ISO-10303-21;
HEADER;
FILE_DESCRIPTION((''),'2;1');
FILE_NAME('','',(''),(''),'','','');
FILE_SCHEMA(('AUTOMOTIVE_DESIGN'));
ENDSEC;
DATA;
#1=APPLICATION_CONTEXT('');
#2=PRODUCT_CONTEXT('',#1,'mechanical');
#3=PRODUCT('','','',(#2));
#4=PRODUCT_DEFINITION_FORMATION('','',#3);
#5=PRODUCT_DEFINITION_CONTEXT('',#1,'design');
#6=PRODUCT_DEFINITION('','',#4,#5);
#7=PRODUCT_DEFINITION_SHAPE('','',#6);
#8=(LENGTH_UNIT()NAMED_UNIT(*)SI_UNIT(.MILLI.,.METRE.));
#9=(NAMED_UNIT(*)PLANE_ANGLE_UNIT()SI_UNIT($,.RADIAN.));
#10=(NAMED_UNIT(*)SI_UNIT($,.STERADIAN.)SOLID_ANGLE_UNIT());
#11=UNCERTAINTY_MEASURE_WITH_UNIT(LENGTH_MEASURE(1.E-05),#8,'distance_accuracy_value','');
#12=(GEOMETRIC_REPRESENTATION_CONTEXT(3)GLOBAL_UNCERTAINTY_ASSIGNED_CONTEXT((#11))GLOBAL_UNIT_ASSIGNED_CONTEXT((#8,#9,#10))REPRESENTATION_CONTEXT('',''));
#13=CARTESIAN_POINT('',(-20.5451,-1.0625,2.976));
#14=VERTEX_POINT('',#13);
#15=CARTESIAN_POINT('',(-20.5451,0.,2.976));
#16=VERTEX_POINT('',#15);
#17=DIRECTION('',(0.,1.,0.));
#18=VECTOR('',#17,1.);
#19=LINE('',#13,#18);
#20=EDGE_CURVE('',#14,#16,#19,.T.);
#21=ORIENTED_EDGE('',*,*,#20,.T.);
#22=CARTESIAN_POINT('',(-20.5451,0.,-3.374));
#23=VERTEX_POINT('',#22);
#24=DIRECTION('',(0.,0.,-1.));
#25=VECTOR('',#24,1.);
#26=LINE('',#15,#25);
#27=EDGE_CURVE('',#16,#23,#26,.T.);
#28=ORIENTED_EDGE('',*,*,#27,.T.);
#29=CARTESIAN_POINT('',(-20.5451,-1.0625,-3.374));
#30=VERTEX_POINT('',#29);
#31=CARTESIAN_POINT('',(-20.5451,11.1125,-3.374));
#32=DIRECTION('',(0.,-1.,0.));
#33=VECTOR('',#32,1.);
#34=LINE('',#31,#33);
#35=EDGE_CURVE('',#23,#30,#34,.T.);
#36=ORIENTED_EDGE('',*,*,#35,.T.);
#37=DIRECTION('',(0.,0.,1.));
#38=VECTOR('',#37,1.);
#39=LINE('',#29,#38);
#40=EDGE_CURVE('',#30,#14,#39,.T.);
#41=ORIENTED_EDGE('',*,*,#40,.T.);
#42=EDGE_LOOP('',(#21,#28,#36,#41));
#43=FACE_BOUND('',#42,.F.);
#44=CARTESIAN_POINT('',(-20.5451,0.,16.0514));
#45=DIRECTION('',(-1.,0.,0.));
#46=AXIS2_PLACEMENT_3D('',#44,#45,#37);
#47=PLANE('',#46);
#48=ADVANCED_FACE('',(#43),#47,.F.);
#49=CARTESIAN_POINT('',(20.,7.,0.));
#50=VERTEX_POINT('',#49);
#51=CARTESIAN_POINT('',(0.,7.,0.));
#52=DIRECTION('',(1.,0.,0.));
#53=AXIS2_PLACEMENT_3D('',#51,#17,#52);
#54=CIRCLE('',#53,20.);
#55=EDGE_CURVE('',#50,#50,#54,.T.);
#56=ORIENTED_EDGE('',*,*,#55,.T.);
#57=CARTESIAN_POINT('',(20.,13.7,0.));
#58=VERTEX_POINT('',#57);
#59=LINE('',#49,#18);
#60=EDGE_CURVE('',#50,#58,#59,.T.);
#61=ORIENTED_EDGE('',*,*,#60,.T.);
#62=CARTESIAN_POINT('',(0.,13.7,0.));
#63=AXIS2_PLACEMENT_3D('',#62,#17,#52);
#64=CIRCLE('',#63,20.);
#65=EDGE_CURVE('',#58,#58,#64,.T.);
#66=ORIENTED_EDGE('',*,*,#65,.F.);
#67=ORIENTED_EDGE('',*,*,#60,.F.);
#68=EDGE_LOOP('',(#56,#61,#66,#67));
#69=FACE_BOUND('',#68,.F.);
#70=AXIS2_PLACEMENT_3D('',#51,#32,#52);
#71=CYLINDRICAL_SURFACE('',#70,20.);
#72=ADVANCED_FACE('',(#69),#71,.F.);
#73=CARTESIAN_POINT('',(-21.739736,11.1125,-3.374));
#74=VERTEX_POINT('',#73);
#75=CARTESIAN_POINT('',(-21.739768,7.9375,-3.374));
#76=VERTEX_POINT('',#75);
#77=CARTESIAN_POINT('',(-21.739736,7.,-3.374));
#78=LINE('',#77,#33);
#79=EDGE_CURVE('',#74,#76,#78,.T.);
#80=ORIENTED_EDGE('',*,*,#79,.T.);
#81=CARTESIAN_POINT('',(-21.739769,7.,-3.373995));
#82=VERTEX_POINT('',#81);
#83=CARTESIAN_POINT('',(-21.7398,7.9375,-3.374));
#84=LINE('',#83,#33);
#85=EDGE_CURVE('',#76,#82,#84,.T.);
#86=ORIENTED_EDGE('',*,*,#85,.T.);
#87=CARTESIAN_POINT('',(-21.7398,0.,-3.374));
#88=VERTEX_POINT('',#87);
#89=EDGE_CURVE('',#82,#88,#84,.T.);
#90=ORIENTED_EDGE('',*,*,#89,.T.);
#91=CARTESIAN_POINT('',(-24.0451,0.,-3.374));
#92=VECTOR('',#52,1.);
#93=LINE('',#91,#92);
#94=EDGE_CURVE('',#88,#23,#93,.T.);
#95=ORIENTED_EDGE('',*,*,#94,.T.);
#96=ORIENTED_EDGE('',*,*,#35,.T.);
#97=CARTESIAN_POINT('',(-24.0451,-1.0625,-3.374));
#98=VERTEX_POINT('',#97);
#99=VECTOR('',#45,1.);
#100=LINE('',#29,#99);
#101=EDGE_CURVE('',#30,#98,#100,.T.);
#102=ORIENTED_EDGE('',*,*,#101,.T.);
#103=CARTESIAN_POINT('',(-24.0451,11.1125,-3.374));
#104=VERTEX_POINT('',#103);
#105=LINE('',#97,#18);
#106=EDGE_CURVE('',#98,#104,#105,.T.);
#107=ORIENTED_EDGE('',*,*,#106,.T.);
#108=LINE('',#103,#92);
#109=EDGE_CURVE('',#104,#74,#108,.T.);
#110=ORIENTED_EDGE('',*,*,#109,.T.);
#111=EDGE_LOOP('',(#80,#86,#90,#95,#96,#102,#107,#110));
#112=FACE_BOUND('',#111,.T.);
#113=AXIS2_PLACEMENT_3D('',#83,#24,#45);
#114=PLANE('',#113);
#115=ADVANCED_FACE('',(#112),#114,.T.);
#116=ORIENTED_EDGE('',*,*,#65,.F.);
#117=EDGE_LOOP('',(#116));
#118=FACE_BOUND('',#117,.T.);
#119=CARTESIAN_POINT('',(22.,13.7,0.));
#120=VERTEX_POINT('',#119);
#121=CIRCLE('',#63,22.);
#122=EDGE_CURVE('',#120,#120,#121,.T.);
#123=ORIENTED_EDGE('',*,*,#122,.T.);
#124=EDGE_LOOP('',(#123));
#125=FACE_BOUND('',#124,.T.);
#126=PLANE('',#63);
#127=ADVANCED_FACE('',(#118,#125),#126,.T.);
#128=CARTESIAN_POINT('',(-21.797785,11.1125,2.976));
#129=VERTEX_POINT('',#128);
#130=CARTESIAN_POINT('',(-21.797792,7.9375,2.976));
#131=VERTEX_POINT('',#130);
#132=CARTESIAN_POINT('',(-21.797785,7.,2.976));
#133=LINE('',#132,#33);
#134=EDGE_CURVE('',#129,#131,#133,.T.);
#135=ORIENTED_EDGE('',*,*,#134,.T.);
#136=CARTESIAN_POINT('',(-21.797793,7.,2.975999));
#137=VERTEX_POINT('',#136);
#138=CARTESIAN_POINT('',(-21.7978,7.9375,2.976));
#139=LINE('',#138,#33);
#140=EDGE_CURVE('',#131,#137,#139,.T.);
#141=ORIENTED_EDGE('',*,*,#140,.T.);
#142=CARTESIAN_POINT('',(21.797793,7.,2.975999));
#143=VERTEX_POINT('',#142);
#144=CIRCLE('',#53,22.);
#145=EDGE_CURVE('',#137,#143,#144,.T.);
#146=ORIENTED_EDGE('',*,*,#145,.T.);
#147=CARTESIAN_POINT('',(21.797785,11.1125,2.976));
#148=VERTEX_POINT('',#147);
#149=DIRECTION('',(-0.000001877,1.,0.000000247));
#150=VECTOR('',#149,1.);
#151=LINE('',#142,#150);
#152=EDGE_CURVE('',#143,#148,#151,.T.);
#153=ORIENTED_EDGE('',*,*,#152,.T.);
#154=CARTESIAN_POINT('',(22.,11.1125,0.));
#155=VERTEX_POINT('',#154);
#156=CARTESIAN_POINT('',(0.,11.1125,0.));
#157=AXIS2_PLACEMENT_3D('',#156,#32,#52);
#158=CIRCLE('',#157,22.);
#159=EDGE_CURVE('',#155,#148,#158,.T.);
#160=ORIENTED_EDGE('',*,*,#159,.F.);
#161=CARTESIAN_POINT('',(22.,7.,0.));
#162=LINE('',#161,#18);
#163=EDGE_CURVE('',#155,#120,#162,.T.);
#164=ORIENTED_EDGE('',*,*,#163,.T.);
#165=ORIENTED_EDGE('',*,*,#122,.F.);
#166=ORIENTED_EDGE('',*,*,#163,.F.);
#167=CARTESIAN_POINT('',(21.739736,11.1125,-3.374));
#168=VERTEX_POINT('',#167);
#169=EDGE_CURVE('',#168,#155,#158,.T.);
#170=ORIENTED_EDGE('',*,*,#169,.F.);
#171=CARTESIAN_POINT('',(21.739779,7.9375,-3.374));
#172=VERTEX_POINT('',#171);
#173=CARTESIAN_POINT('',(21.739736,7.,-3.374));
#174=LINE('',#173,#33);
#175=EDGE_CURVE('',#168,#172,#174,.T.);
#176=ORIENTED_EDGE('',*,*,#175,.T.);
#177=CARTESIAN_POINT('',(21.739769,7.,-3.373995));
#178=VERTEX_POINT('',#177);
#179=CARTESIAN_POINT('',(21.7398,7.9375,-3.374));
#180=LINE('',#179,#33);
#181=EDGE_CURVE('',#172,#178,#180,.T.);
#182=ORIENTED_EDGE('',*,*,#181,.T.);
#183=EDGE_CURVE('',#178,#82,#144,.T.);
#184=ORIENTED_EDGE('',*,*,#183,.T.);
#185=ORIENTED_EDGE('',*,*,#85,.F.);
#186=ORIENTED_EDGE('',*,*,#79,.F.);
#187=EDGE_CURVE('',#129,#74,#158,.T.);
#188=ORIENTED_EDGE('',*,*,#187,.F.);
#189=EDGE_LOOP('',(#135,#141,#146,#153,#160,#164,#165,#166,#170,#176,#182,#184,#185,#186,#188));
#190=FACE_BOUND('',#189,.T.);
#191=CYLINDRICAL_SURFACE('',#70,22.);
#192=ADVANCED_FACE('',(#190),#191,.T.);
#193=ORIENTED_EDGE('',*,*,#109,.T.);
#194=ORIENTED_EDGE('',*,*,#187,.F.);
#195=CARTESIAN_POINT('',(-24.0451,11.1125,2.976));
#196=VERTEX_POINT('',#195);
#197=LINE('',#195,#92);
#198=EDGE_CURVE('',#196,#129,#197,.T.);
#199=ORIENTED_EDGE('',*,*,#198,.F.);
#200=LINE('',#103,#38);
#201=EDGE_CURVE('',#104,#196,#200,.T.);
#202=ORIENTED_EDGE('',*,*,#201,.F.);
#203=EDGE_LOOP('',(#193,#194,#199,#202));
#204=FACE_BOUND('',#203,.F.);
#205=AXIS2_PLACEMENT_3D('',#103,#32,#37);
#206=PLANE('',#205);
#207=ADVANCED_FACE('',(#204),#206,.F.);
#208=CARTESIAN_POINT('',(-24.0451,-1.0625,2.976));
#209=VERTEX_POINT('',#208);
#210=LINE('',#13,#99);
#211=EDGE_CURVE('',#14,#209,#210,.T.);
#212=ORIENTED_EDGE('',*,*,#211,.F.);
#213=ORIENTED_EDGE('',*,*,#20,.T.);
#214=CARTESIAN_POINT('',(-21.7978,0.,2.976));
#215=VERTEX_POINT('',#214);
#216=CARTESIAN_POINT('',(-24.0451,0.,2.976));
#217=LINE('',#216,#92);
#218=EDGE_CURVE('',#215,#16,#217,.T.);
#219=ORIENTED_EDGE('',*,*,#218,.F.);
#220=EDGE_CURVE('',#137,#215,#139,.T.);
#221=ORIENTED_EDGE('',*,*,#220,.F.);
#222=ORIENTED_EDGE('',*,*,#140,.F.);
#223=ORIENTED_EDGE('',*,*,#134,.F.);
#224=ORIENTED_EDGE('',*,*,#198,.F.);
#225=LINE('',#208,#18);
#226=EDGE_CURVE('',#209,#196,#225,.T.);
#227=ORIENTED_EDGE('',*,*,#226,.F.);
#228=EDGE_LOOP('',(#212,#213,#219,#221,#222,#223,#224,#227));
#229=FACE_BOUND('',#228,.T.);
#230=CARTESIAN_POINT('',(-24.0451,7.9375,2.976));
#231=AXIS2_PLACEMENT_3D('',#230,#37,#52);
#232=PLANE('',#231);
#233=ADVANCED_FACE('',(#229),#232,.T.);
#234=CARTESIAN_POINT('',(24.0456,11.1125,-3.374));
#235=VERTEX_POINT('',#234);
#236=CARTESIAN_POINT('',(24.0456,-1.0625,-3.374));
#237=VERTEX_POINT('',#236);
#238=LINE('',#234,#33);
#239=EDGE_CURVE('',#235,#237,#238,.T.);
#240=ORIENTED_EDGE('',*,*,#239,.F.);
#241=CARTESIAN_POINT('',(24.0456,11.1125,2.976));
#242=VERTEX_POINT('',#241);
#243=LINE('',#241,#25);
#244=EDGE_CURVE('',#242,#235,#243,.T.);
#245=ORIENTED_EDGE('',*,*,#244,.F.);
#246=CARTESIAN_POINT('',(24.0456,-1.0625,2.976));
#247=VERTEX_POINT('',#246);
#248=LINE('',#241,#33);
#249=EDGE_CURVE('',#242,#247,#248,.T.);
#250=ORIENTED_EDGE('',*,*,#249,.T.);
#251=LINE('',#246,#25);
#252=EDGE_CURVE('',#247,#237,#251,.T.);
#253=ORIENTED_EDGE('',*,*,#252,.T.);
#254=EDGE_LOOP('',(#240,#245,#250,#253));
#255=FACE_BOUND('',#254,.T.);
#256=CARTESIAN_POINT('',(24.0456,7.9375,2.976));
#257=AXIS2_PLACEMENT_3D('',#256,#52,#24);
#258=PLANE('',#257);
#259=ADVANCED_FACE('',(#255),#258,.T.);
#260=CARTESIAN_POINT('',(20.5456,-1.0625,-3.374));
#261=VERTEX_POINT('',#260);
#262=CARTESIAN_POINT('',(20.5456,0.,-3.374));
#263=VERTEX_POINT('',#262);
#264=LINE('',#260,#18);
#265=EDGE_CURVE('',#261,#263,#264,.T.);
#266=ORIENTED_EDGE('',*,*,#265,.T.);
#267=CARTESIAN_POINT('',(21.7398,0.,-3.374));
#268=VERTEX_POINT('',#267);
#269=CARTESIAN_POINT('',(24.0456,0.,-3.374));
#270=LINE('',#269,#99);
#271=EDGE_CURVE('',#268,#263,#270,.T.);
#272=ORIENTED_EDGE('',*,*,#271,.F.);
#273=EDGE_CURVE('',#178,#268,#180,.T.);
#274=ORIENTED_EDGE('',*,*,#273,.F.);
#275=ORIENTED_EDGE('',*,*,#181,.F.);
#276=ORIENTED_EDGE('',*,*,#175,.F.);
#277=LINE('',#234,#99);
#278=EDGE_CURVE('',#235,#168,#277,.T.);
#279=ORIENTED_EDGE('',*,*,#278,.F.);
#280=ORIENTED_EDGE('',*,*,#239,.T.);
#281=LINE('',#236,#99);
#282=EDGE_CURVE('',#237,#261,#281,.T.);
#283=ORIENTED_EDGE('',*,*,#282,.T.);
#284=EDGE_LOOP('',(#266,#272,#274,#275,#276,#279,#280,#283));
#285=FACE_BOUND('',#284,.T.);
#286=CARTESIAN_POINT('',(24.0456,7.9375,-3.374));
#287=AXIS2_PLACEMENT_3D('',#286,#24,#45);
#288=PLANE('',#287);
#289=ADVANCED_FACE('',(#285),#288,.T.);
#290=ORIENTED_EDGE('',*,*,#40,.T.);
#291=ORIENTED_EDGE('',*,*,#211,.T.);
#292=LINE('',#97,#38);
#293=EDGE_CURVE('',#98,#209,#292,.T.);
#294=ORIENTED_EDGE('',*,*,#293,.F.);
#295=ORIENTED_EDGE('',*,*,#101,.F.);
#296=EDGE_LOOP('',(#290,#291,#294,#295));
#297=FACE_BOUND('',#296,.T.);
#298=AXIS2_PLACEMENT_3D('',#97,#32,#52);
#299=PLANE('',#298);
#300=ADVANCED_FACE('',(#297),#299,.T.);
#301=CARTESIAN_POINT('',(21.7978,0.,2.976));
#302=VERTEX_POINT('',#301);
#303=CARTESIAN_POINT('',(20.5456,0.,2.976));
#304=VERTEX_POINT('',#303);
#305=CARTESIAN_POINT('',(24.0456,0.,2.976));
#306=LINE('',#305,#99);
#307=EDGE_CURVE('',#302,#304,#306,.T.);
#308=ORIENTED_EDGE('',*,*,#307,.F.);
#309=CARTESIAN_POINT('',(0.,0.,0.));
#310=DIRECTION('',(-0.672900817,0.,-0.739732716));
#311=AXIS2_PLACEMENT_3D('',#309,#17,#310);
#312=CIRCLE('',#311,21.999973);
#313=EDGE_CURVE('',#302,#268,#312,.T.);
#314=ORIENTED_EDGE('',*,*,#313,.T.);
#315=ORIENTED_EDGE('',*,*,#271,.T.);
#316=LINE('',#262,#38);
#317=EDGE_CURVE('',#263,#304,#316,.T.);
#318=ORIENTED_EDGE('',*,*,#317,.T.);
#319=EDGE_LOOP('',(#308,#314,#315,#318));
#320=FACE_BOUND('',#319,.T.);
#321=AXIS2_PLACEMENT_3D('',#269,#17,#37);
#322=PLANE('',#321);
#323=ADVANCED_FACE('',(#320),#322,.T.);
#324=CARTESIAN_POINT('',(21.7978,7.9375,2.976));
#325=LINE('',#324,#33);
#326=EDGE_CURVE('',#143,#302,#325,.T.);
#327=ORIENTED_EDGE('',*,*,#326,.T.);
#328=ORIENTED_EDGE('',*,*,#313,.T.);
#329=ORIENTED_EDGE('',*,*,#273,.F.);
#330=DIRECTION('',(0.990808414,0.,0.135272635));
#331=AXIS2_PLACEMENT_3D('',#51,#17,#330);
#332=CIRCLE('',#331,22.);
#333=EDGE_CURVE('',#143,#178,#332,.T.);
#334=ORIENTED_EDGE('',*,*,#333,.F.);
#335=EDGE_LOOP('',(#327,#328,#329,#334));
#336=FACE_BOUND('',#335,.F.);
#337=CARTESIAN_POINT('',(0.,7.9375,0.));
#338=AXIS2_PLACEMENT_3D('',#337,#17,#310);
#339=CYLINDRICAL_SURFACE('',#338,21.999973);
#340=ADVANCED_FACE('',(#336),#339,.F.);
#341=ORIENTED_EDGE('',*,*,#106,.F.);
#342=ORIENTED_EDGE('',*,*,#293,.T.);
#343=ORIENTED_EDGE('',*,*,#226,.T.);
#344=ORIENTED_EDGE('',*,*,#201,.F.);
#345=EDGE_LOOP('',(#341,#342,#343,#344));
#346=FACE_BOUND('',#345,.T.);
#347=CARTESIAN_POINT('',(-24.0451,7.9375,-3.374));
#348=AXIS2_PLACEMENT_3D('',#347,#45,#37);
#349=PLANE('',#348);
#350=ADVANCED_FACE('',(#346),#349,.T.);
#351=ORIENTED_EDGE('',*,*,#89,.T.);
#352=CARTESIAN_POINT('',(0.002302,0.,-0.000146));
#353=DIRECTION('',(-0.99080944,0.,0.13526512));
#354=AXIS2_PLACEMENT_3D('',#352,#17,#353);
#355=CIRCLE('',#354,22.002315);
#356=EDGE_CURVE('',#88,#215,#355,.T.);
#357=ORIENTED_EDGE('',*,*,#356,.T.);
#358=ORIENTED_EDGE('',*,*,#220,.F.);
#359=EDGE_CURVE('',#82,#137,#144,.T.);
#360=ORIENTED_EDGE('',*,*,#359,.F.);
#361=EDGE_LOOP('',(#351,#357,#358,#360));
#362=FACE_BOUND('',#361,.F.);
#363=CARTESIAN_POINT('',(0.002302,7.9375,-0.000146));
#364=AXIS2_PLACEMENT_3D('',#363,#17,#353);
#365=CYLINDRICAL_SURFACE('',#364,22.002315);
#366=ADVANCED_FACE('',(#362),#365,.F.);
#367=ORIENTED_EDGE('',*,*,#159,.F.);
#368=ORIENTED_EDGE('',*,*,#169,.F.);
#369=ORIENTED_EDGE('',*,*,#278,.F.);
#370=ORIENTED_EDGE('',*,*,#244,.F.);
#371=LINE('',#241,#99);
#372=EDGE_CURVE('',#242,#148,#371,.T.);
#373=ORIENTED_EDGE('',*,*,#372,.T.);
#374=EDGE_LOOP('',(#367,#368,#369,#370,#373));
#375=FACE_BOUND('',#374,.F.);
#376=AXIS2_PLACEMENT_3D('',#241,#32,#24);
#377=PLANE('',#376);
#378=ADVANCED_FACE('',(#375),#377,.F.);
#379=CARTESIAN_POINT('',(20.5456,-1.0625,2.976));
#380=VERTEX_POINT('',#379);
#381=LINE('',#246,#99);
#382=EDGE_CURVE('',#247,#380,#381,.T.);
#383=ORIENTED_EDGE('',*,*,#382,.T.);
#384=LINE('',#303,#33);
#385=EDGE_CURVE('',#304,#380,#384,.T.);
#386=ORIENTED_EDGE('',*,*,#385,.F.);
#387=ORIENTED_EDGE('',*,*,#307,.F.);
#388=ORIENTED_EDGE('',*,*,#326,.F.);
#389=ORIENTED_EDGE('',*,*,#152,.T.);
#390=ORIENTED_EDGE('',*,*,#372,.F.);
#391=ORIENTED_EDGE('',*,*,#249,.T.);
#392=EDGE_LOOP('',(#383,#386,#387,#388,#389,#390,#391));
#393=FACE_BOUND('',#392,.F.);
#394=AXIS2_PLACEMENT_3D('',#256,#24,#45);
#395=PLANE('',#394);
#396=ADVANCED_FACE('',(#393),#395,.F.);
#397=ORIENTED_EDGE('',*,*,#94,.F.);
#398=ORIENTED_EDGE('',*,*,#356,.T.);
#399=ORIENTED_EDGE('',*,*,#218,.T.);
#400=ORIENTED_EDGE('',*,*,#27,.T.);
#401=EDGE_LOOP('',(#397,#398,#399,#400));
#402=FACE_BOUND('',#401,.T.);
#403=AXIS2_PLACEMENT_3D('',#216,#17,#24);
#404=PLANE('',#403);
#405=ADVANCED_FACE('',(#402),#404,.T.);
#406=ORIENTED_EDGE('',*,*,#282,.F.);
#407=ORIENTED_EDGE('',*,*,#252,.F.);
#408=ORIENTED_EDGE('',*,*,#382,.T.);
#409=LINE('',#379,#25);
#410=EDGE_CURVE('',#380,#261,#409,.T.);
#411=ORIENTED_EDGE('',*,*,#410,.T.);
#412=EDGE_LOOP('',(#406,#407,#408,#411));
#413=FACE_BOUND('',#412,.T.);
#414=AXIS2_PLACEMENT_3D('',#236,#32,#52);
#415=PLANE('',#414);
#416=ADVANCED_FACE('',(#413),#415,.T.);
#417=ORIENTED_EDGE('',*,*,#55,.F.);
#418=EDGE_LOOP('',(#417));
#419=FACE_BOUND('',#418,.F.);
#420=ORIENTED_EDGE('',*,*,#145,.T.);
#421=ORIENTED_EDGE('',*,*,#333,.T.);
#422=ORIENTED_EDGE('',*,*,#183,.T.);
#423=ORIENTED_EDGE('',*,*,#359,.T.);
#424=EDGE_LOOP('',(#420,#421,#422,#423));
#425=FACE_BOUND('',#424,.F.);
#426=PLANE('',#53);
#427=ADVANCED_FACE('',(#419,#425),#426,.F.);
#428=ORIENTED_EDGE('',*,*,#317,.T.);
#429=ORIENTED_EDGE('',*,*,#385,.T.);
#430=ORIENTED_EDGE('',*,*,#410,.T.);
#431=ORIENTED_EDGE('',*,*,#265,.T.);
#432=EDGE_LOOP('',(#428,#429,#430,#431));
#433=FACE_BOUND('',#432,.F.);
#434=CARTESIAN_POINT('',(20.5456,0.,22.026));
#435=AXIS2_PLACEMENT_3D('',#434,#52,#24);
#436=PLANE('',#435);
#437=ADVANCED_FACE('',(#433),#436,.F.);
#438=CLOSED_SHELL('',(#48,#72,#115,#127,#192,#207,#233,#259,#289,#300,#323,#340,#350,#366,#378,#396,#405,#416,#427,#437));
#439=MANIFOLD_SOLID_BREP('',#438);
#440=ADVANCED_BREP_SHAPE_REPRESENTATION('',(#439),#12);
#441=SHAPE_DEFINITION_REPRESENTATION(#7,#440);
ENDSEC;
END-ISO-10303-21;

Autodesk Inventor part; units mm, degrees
ref_plane "YZ Plane" through (0, 0, 0) normal (1, 0, 0) x (0, 1, 0)
ref_plane "XZ Plane" through (0, 0, 0) normal (0, 1, 0) x (-1, 0, 0)
ref_plane "XY Plane" through (0, 0, 0) normal (0, 0, 1) x (1, 0, 0)
ref_plane "Work Plane11" through (0, 7, 0) normal (0, 1, 0) x (1, 0, 0)
sketch "Sketch16" plane through (0, 7, 0) normal (0, 1, 0) x (1, 0, 0)
  circle A0 centre (0, 0) radius 22
  circle A1 centre (0, 0) radius 20 projected
  circle A2 centre (0, 0) radius 18.4
  dimension "d44" = 36.8
extrude "Extrusion13" add sketch "Sketch16" along normal blind 6.7 contours A0
ref_plane "Work Plane3" through (24.0456, 0, 22.026) normal (1, 0, 0) x (0, 0, -1)
sketch "Sketch19" plane through (24.0456, 0, 22.026) normal (1, 0, 0) x (0, 0, -1)
  line L0 (19.05, 11.1125) -> (25.4, 11.1125)
  line L1 (25.4, 11.1125) -> (25.4, 7.9375)
  line L2 (25.4, 7.9375) -> (19.05, 7.9375)
  line L3 (19.05, 7.9375) -> (19.05, 11.1125)
  point P0 (22.026, 0)
extrude "Extrusion15" add sketch "Sketch19" against normal blind 3
sketch "Sketch20" plane through (24.0456, 7.9375, -3.374) normal (0, -1, 0) x (1, 0, 0)
  line L0 (0, 6.35) -> (0, 0) projected
  line L1 (0, 6.35) -> (0, 0)
  line L2 (0, 0) -> (-2.3058, 0) projected
  line L3 (0, 0) -> (-2.3058, 0)
  arc A0 (-38.8494, -12.9001) -> (-38.8494, 19.6481) centre (-24.0456, 3.374) ccw projected
  arc A1 (-2.3058, 0) -> (-2.3058, 6.7481) centre (-24.0456, 3.374) ccw
  line L4 (0, 6.35) -> (-2.2478, 6.35) projected
  line L5 (0, 6.35) -> (-2.2478, 6.35)
  point P0 (-3, 0)
  point P1 (-3, 6.35)
extrude "Extrusion16" add sketch "Sketch20" along normal blind 9
sketch "Sketch21" plane through (24.0456, 0, 22.026) normal (1, 0, 0) x (0, 0, -1)
  line L0 (25.4, 0) -> (19.05, 0)
  line L1 (19.05, 11.1125) -> (19.05, -1.0625) projected
  line L2 (19.05, 0) -> (19.05, -1.0625)
  line L3 (25.4, 11.1125) -> (25.4, -1.0625) projected
  line L4 (19.05, -1.0625) -> (25.4, -1.0625)
  line L5 (25.4, -1.0625) -> (25.4, 0)
  point P0 (22.026, 0)
ref_plane "Work Plane4" through (-24.0451, 0, 16.0514) normal (-1, 0, 0) x (0, 0, 1)
sketch "Sketch23" plane through (-24.0451, 0, 16.0514) normal (-1, 0, 0) x (0, 0, 1)
  line L0 (-19.4254, 11.1125) -> (-19.4254, 0) projected
  line L1 (-13.0754, 11.1125) -> (-13.0754, -1.0625) projected
  line L2 (-19.4254, 11.1125) -> (-13.0754, 11.1125)
  line L3 (-13.0754, 11.1125) -> (-13.0754, 7.9375)
  line L4 (-13.0754, 7.9375) -> (-19.4254, 7.9375)
  line L5 (-19.4254, 7.9375) -> (-19.4254, 11.1125)
  point P0 (-16.0514, 0)
extrude "Extrusion17" add sketch "Sketch23" against normal blind 3
sketch "Sketch24" plane through (-24.0451, 7.9375, -3.374) normal (0, -1, 0) x (1, 0, 0)
  arc A0 (2.2473, 6.35) -> (2.3053, 0) centre (24.0451, 3.374) ccw projected
  line L0 (2.3053, 0) -> (0, 0)
  line L1 (0, 0) -> (0, 6.35) projected
  line L2 (0, 0) -> (0, 6.35)
  line L3 (0, 6.35) -> (2.2473, 6.35) projected
  line L4 (0, 6.35) -> (2.2473, 6.35)
  arc A1 (2.2473, 6.35) -> (2.3053, 0) centre (24.0451, 3.374) ccw
  point P0 (3, 6.35)
extrude "Extrusion18" add sketch "Sketch24" along normal blind 9
sketch "Sketch25" plane through (-24.0451, 0, 16.0514) normal (-1, 0, 0) x (0, 0, 1)
  line L0 (-19.4254, 11.1125) -> (-19.4254, -1.0625) projected
  line L1 (-13.0754, 0) -> (5.9486, 0) projected
  line L2 (-19.4254, -1.0625) -> (-13.0754, -1.0625)
  line L3 (-13.0754, -1.0625) -> (-13.0754, 0)
  line L4 (-13.0754, 0) -> (-19.4254, 0)
  line L5 (-19.4254, 0) -> (-19.4254, -1.0625)
  point P0 (-16.0514, 0)
  point P1 (0.2227, 0)
extrude "Extrusion19" add sketch "Sketch25" against normal blind 3.5
sketch "Sketch26" plane through (24.0456, 0, 22.026) normal (1, 0, 0) x (0, 0, -1)
  line L0 (25.4, 11.1125) -> (25.4, 0) projected
  line L1 (19.05, -1.0625) -> (25.4, -1.0625) projected
  line L2 (25.4, 0) -> (19.05, 0)
  line L3 (19.05, 0) -> (19.05, -1.0625)
  line L4 (19.05, -1.0625) -> (25.4, -1.0625)
  line L5 (25.4, -1.0625) -> (25.4, 0)
  point P0 (22.026, 0)
extrude "Extrusion20" add sketch "Sketch26" against normal blind 3.5
properties part number "watchBodyOneTop"
